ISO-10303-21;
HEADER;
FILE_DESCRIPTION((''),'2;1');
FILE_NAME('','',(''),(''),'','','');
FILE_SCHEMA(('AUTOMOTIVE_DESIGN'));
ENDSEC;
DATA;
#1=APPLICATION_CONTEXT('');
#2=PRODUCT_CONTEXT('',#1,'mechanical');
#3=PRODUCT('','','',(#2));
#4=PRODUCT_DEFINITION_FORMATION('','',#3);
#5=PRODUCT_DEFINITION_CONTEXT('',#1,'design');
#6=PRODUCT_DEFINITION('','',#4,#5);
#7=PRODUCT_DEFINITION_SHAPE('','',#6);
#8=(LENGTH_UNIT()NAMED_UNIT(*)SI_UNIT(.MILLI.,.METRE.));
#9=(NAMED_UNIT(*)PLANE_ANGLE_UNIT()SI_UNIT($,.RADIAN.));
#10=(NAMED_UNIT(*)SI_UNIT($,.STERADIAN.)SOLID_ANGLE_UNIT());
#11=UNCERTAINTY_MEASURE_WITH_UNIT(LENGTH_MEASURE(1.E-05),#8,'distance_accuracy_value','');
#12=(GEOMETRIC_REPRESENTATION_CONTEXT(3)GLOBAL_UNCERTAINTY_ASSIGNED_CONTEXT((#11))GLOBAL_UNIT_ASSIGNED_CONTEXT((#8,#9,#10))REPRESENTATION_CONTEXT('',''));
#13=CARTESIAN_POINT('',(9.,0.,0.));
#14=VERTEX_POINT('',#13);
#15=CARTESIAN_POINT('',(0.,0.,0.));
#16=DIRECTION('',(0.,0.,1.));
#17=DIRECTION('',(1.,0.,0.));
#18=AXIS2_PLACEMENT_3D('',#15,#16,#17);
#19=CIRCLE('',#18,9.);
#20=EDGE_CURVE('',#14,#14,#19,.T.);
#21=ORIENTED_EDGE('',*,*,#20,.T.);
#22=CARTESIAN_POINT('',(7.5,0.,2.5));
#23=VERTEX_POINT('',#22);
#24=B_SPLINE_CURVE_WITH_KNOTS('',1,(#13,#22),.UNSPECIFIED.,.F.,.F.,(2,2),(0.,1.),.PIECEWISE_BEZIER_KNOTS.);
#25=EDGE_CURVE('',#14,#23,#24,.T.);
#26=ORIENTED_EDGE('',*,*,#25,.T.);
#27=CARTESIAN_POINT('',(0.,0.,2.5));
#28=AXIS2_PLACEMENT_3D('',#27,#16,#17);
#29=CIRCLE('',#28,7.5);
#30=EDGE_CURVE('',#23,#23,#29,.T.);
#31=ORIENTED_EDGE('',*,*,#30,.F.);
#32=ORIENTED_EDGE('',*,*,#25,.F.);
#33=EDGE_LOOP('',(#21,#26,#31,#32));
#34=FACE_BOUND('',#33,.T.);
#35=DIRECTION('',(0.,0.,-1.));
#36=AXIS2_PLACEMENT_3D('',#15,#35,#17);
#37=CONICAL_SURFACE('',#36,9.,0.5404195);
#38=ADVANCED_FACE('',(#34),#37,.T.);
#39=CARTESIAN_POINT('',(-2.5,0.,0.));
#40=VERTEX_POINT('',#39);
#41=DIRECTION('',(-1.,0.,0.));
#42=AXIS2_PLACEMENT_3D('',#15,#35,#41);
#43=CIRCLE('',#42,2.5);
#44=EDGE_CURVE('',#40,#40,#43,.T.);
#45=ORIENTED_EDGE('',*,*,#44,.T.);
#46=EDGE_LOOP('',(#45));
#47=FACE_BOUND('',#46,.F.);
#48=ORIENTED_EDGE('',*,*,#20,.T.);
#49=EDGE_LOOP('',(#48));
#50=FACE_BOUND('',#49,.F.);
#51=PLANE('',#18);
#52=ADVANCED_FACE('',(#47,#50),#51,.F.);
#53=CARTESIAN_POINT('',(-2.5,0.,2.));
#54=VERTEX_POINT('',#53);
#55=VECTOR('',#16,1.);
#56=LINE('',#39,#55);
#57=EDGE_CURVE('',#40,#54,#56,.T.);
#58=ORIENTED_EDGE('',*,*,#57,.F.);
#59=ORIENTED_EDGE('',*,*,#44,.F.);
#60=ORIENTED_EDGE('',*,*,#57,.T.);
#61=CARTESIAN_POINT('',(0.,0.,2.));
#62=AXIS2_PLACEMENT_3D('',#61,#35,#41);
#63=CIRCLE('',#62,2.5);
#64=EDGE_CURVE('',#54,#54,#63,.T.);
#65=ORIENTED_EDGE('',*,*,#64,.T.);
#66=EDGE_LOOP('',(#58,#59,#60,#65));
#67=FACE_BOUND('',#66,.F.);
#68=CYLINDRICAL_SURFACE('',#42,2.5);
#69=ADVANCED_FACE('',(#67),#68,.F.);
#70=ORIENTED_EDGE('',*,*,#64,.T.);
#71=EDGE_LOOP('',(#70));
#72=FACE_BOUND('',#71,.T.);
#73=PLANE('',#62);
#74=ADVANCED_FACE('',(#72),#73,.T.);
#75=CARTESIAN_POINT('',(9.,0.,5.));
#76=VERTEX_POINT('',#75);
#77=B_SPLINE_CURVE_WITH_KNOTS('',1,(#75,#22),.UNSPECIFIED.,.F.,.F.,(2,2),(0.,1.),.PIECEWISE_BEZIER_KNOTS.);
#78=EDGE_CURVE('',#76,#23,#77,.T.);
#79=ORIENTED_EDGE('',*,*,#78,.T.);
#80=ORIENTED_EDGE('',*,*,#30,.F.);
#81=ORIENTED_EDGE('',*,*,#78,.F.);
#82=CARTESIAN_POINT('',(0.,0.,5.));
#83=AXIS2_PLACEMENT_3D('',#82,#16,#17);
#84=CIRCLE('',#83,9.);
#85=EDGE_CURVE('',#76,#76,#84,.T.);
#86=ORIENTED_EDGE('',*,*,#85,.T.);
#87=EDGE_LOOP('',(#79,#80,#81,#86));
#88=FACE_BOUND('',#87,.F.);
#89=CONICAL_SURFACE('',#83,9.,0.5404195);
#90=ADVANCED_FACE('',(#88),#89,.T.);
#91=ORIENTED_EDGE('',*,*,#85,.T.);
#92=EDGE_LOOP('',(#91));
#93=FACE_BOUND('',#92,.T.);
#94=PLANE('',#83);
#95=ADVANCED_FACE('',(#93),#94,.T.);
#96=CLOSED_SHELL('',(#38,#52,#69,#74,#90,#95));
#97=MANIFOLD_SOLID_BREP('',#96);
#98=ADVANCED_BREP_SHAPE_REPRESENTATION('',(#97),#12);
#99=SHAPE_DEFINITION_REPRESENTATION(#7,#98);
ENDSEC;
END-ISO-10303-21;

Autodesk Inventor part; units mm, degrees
ref_plane "YZ Plane" through (0, 0, 0) normal (1, 0, 0) x (0, 1, 0)
sketch "스케치1" plane through (0, 0, 0) normal (0, 0, 1) x (1, 0, 0)
  circle A0 centre (0, 0) radius 9
  dimension "d0" = 18
ref_plane "작업 평면2" through (0, 0, 2.5) normal (0, 0, 1) x (1, 0, 0)
sketch "스케치2" plane through (0, 0, 2.5) normal (0, 0, 1) x (1, 0, 0)
  circle A0 centre (0, 0) radius 7.5
  dimension "d3" = 15
ref_plane "작업 평면1" through (0, 0, 5) normal (0, 0, 1) x (1, 0, 0)
sketch "스케치3" plane through (0, 0, 5) normal (0, 0, 1) x (1, 0, 0)
  circle A0 centre (0, 0) radius 9
loft "로프트1" add profiles "스케치3", "스케치2"
loft "로프트2" add profiles "스케치1" section 2 edges at (-7.5, 0, 2.5)
sketch "스케치4" plane through (0, 0, 0) normal (0, 0, -1) x (-1, 0, 0)
  circle A0 centre (0, 0) radius 2.5
  dimension "d13" = 5
extrude "돌출2" cut sketch "스케치4" against normal blind 2
properties part number "wheel"
